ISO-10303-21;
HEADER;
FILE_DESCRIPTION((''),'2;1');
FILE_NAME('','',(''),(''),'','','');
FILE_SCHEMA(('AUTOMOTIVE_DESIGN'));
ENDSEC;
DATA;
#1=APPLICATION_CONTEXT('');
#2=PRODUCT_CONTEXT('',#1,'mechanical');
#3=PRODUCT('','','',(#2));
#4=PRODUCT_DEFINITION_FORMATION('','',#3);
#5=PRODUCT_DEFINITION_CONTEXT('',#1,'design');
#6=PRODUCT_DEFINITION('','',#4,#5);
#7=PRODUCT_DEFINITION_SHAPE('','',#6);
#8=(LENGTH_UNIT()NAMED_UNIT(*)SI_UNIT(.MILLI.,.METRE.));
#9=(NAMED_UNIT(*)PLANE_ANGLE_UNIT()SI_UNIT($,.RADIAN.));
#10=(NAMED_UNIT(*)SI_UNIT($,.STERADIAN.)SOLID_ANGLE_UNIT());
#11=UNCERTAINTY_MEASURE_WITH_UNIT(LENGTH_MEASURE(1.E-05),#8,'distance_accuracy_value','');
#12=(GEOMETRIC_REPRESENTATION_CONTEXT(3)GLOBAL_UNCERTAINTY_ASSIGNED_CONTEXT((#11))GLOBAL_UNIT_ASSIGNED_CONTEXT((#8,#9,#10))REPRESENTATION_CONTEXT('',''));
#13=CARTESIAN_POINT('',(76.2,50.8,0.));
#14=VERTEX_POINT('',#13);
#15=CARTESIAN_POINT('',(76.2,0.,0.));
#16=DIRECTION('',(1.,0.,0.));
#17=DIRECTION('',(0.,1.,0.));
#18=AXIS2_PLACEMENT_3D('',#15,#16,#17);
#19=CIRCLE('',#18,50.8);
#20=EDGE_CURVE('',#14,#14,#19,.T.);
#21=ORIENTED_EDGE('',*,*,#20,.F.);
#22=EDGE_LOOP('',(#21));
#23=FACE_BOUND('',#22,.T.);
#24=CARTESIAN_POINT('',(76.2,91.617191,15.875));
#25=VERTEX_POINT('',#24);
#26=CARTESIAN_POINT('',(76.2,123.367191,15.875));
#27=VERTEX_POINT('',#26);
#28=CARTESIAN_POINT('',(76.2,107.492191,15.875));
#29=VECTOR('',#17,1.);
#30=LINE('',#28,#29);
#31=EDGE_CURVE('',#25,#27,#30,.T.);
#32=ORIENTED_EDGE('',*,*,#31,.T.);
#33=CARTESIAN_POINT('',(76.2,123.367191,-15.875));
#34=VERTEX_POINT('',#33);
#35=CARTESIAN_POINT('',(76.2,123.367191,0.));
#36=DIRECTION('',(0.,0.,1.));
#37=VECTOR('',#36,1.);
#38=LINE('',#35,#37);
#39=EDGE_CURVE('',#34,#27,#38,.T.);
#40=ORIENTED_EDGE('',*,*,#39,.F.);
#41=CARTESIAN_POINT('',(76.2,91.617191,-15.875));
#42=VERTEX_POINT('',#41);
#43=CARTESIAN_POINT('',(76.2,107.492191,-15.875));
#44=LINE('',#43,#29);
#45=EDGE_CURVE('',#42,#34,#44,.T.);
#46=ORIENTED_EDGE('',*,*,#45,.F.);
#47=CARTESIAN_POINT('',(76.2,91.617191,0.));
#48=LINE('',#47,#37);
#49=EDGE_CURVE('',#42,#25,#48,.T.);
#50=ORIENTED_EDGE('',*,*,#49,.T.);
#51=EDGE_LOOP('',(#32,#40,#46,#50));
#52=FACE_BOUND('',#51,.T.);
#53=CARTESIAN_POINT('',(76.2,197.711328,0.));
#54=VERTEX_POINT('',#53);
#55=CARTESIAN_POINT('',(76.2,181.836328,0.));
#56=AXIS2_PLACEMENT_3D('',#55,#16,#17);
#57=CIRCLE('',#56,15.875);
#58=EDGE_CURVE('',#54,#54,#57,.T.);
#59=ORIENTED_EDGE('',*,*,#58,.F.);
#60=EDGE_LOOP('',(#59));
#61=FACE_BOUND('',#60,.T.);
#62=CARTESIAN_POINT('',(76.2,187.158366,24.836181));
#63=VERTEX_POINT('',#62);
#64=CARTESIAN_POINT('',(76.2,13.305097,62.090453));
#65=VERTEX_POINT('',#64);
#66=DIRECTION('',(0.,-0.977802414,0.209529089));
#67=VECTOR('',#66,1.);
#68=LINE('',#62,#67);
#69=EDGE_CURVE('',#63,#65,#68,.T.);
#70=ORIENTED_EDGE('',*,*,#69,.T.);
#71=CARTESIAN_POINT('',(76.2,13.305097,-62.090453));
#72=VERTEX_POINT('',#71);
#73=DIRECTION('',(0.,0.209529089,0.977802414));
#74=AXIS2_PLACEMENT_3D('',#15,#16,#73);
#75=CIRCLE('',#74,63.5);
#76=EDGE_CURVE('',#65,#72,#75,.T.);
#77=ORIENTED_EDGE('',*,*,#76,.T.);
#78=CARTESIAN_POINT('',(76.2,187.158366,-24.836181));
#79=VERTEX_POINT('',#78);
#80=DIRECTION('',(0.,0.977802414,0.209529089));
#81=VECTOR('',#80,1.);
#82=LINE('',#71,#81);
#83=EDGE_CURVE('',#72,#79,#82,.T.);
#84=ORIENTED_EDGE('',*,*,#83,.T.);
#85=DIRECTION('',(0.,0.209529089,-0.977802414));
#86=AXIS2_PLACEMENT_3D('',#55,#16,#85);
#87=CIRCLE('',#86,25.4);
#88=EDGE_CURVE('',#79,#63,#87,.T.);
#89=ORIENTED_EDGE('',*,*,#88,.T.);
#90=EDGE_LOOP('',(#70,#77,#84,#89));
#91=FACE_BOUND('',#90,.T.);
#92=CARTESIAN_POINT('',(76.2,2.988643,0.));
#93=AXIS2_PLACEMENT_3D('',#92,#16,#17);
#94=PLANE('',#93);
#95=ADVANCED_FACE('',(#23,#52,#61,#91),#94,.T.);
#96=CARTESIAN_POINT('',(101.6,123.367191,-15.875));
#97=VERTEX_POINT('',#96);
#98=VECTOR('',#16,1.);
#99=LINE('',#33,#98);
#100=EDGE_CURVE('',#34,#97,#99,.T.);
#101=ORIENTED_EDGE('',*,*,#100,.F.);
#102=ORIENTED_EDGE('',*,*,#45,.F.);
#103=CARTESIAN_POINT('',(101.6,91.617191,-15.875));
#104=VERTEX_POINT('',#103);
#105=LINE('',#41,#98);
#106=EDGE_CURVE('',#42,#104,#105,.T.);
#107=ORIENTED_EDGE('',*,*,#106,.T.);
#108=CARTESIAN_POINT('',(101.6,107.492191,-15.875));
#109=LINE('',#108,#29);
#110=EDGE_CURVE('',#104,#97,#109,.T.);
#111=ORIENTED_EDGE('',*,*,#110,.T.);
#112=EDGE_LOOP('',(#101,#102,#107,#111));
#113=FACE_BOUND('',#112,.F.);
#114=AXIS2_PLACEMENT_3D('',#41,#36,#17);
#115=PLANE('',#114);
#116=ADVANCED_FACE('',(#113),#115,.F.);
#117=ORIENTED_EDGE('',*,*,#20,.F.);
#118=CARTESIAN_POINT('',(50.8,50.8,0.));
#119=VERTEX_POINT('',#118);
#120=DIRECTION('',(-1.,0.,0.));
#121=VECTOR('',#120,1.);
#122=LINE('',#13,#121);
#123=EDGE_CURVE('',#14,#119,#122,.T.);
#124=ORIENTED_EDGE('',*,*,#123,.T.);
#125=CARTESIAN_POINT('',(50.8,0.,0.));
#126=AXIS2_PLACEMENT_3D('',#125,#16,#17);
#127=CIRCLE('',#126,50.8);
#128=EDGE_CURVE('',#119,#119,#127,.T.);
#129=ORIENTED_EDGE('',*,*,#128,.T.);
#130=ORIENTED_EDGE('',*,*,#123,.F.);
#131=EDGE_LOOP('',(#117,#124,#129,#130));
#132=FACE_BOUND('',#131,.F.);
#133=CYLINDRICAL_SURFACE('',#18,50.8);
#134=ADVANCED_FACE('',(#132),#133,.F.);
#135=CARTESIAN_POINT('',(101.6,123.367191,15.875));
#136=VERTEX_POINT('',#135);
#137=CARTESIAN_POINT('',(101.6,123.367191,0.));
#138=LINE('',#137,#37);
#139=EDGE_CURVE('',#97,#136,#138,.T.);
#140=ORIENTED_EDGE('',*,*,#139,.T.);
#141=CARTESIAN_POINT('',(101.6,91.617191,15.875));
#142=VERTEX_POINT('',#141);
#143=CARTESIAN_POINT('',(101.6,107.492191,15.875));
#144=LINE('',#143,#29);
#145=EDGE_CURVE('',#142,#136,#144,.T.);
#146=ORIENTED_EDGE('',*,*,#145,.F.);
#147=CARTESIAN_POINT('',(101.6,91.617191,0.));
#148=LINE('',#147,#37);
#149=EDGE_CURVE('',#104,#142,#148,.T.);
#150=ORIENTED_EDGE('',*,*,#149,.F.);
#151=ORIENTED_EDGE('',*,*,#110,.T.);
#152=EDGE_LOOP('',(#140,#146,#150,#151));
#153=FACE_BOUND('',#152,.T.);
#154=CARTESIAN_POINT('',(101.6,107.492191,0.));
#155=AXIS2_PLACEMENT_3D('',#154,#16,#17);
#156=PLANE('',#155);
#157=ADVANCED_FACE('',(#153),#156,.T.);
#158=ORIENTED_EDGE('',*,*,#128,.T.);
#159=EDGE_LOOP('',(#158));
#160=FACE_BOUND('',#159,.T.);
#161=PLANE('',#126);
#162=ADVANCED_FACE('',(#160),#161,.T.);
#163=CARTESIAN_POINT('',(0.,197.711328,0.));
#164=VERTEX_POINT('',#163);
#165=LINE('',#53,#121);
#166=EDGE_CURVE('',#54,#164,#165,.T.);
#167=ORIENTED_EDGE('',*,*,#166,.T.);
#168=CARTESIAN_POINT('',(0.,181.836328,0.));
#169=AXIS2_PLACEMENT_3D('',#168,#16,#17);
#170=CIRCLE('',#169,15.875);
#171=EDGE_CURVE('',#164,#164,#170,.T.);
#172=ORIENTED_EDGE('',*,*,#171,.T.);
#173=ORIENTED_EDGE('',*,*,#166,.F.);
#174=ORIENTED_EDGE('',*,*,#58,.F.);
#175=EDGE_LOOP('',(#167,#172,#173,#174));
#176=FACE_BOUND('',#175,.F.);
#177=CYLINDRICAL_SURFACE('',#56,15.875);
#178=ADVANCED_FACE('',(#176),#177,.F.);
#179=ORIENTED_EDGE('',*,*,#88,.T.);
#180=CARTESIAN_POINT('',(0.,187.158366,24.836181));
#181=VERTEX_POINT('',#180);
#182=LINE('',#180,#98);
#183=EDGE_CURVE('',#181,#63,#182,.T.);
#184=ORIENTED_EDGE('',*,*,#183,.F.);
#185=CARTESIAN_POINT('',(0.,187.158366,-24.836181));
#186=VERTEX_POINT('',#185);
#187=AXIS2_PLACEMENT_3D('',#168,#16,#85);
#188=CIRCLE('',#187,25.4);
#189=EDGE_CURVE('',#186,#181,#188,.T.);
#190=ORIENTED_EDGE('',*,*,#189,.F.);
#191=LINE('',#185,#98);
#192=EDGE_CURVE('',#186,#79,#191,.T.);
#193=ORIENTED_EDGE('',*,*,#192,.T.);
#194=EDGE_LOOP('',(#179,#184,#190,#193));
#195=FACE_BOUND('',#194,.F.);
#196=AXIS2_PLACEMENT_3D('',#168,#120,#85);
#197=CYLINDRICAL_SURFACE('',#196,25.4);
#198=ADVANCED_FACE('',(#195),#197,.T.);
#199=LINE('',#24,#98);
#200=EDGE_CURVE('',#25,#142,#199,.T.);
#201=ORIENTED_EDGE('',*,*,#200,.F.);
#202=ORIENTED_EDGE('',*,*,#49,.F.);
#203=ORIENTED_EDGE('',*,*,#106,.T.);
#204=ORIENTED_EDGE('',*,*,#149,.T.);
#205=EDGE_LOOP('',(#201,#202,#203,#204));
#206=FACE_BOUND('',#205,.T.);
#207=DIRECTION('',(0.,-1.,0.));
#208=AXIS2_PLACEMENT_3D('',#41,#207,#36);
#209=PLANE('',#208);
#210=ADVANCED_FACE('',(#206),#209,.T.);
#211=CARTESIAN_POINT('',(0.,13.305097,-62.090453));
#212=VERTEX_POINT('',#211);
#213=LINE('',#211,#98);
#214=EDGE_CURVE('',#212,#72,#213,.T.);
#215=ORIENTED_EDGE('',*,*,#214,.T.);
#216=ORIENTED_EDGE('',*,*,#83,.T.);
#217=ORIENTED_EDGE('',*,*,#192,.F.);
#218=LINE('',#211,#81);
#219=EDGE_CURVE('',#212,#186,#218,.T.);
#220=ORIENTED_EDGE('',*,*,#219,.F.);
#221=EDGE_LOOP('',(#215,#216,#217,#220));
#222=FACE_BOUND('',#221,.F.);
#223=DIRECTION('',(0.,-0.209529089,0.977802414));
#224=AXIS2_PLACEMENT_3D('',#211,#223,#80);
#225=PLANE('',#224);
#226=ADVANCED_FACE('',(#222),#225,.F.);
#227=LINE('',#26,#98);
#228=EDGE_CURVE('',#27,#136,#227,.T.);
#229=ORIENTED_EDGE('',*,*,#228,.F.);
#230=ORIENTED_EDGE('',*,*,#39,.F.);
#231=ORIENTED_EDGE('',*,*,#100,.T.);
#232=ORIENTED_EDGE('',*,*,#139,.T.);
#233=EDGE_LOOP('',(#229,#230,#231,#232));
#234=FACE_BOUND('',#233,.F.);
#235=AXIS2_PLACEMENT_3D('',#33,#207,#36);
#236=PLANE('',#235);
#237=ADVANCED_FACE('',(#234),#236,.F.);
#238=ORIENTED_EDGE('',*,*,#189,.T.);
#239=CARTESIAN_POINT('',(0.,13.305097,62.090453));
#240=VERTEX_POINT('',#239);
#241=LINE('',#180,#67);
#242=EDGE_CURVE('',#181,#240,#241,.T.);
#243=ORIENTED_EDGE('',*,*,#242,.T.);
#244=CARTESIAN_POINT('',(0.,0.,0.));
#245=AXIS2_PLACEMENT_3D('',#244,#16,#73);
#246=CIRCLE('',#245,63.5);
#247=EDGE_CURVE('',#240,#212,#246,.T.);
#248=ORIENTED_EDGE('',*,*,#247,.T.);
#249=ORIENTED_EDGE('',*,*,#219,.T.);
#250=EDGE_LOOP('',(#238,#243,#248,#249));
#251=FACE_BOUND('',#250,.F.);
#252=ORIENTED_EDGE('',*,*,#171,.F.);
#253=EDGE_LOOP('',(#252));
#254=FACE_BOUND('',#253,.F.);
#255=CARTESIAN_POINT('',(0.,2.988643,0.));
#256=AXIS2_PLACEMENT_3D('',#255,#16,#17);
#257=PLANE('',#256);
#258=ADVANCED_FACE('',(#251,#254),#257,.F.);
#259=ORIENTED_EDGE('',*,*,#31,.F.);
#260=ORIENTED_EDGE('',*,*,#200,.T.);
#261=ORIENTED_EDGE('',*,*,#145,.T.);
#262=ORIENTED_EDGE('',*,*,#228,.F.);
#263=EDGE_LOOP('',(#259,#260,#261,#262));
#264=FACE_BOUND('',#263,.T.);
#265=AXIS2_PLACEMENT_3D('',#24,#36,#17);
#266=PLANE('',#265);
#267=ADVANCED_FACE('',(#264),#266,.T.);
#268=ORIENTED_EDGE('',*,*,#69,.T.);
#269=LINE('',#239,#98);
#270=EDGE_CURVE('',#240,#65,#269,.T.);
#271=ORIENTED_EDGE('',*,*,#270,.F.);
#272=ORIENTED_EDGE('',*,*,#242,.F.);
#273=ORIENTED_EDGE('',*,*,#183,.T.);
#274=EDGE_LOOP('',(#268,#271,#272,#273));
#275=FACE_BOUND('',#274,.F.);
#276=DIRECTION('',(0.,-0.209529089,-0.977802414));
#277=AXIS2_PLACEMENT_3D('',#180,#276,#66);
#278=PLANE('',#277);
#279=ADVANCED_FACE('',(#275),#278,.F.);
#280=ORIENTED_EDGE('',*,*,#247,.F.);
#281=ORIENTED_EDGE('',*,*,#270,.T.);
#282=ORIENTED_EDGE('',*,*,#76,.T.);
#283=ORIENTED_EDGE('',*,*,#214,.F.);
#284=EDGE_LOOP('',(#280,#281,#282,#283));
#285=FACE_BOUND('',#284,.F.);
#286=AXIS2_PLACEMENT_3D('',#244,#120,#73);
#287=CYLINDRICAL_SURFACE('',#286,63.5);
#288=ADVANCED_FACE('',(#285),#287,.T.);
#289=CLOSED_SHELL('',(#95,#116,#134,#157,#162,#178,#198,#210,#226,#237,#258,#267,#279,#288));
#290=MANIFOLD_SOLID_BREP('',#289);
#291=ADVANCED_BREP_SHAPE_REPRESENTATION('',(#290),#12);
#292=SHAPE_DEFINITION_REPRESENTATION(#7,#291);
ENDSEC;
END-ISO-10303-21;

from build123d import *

# Parameters (mm, degrees)
F1_DEPTH = 76.2
F2_R     = 50.8
F3_DEPTH = 25.4
F4_W     = 31.75
F4_H     = 31.75
F5_DEPTH = 25.4
F6_R     = 15.875
F7_DEPTH = 76.2


with BuildPart() as f1:
    # F0 (on Right) → F1 (new body)
    with BuildSketch(Plane.YZ):
        with BuildLine():
            ThreePointArc((13.3050971344, -62.0904532939), (49.3817965856, -39.9210241099), (63.5, 0))
            ThreePointArc((63.5, 0), (49.3817965856, 39.9210241099), (13.3050971344, 62.0904532939))
            ThreePointArc((13.3050971344, 62.0904532939), (-63.5, 0), (13.3050971344, -62.0904532939))
        make_face()
        with BuildLine():
            ThreePointArc((13.3050971344, 62.0904532939), (49.3817965856, 39.9210241099), (63.5, 0))
            ThreePointArc((63.5, 0), (49.3817965856, -39.9210241099), (13.3050971344, -62.0904532939))
            Line((13.3050971344, -62.0904532939), (187.1583663574, -24.8361813176))
            ThreePointArc((187.1583663574, -24.8361813176), (156.4363275036, 0), (187.1583663574, 24.8361813176))
            Line((187.1583663574, 24.8361813176), (13.3050971344, 62.0904532939))
        make_face()
        with BuildLine():
            ThreePointArc((207.2363275036, 0), (201.5890461378, 15.968409644), (187.1583663574, 24.8361813176))
            ThreePointArc((187.1583663574, 24.8361813176), (156.4363275036, 0), (187.1583663574, -24.8361813176))
            ThreePointArc((187.1583663574, -24.8361813176), (201.5890461378, -15.968409644), (207.2363275036, 0))
        make_face()
    extrude(amount=F1_DEPTH)

    # F2 (on face) → F3 (cut)
    with BuildSketch(Plane.YZ.offset(76.2)):
        Circle(F2_R)
    extrude(amount=-F3_DEPTH, mode=Mode.SUBTRACT)

    # F4 (on face) → F5 (join)
    with BuildSketch(Plane.YZ.offset(76.2)):
        with Locations((107.4921913939, 0)):
            Rectangle(F4_W, F4_H)
    extrude(amount=F5_DEPTH)

    # F6 (on face) → F7 (cut, through all)
    with BuildSketch(Plane.YZ.offset(76.2)):
        with Locations((181.8363275036, 0)):
            Circle(F6_R)
    extrude(amount=-F7_DEPTH, mode=Mode.SUBTRACT)


solid = f1.part
